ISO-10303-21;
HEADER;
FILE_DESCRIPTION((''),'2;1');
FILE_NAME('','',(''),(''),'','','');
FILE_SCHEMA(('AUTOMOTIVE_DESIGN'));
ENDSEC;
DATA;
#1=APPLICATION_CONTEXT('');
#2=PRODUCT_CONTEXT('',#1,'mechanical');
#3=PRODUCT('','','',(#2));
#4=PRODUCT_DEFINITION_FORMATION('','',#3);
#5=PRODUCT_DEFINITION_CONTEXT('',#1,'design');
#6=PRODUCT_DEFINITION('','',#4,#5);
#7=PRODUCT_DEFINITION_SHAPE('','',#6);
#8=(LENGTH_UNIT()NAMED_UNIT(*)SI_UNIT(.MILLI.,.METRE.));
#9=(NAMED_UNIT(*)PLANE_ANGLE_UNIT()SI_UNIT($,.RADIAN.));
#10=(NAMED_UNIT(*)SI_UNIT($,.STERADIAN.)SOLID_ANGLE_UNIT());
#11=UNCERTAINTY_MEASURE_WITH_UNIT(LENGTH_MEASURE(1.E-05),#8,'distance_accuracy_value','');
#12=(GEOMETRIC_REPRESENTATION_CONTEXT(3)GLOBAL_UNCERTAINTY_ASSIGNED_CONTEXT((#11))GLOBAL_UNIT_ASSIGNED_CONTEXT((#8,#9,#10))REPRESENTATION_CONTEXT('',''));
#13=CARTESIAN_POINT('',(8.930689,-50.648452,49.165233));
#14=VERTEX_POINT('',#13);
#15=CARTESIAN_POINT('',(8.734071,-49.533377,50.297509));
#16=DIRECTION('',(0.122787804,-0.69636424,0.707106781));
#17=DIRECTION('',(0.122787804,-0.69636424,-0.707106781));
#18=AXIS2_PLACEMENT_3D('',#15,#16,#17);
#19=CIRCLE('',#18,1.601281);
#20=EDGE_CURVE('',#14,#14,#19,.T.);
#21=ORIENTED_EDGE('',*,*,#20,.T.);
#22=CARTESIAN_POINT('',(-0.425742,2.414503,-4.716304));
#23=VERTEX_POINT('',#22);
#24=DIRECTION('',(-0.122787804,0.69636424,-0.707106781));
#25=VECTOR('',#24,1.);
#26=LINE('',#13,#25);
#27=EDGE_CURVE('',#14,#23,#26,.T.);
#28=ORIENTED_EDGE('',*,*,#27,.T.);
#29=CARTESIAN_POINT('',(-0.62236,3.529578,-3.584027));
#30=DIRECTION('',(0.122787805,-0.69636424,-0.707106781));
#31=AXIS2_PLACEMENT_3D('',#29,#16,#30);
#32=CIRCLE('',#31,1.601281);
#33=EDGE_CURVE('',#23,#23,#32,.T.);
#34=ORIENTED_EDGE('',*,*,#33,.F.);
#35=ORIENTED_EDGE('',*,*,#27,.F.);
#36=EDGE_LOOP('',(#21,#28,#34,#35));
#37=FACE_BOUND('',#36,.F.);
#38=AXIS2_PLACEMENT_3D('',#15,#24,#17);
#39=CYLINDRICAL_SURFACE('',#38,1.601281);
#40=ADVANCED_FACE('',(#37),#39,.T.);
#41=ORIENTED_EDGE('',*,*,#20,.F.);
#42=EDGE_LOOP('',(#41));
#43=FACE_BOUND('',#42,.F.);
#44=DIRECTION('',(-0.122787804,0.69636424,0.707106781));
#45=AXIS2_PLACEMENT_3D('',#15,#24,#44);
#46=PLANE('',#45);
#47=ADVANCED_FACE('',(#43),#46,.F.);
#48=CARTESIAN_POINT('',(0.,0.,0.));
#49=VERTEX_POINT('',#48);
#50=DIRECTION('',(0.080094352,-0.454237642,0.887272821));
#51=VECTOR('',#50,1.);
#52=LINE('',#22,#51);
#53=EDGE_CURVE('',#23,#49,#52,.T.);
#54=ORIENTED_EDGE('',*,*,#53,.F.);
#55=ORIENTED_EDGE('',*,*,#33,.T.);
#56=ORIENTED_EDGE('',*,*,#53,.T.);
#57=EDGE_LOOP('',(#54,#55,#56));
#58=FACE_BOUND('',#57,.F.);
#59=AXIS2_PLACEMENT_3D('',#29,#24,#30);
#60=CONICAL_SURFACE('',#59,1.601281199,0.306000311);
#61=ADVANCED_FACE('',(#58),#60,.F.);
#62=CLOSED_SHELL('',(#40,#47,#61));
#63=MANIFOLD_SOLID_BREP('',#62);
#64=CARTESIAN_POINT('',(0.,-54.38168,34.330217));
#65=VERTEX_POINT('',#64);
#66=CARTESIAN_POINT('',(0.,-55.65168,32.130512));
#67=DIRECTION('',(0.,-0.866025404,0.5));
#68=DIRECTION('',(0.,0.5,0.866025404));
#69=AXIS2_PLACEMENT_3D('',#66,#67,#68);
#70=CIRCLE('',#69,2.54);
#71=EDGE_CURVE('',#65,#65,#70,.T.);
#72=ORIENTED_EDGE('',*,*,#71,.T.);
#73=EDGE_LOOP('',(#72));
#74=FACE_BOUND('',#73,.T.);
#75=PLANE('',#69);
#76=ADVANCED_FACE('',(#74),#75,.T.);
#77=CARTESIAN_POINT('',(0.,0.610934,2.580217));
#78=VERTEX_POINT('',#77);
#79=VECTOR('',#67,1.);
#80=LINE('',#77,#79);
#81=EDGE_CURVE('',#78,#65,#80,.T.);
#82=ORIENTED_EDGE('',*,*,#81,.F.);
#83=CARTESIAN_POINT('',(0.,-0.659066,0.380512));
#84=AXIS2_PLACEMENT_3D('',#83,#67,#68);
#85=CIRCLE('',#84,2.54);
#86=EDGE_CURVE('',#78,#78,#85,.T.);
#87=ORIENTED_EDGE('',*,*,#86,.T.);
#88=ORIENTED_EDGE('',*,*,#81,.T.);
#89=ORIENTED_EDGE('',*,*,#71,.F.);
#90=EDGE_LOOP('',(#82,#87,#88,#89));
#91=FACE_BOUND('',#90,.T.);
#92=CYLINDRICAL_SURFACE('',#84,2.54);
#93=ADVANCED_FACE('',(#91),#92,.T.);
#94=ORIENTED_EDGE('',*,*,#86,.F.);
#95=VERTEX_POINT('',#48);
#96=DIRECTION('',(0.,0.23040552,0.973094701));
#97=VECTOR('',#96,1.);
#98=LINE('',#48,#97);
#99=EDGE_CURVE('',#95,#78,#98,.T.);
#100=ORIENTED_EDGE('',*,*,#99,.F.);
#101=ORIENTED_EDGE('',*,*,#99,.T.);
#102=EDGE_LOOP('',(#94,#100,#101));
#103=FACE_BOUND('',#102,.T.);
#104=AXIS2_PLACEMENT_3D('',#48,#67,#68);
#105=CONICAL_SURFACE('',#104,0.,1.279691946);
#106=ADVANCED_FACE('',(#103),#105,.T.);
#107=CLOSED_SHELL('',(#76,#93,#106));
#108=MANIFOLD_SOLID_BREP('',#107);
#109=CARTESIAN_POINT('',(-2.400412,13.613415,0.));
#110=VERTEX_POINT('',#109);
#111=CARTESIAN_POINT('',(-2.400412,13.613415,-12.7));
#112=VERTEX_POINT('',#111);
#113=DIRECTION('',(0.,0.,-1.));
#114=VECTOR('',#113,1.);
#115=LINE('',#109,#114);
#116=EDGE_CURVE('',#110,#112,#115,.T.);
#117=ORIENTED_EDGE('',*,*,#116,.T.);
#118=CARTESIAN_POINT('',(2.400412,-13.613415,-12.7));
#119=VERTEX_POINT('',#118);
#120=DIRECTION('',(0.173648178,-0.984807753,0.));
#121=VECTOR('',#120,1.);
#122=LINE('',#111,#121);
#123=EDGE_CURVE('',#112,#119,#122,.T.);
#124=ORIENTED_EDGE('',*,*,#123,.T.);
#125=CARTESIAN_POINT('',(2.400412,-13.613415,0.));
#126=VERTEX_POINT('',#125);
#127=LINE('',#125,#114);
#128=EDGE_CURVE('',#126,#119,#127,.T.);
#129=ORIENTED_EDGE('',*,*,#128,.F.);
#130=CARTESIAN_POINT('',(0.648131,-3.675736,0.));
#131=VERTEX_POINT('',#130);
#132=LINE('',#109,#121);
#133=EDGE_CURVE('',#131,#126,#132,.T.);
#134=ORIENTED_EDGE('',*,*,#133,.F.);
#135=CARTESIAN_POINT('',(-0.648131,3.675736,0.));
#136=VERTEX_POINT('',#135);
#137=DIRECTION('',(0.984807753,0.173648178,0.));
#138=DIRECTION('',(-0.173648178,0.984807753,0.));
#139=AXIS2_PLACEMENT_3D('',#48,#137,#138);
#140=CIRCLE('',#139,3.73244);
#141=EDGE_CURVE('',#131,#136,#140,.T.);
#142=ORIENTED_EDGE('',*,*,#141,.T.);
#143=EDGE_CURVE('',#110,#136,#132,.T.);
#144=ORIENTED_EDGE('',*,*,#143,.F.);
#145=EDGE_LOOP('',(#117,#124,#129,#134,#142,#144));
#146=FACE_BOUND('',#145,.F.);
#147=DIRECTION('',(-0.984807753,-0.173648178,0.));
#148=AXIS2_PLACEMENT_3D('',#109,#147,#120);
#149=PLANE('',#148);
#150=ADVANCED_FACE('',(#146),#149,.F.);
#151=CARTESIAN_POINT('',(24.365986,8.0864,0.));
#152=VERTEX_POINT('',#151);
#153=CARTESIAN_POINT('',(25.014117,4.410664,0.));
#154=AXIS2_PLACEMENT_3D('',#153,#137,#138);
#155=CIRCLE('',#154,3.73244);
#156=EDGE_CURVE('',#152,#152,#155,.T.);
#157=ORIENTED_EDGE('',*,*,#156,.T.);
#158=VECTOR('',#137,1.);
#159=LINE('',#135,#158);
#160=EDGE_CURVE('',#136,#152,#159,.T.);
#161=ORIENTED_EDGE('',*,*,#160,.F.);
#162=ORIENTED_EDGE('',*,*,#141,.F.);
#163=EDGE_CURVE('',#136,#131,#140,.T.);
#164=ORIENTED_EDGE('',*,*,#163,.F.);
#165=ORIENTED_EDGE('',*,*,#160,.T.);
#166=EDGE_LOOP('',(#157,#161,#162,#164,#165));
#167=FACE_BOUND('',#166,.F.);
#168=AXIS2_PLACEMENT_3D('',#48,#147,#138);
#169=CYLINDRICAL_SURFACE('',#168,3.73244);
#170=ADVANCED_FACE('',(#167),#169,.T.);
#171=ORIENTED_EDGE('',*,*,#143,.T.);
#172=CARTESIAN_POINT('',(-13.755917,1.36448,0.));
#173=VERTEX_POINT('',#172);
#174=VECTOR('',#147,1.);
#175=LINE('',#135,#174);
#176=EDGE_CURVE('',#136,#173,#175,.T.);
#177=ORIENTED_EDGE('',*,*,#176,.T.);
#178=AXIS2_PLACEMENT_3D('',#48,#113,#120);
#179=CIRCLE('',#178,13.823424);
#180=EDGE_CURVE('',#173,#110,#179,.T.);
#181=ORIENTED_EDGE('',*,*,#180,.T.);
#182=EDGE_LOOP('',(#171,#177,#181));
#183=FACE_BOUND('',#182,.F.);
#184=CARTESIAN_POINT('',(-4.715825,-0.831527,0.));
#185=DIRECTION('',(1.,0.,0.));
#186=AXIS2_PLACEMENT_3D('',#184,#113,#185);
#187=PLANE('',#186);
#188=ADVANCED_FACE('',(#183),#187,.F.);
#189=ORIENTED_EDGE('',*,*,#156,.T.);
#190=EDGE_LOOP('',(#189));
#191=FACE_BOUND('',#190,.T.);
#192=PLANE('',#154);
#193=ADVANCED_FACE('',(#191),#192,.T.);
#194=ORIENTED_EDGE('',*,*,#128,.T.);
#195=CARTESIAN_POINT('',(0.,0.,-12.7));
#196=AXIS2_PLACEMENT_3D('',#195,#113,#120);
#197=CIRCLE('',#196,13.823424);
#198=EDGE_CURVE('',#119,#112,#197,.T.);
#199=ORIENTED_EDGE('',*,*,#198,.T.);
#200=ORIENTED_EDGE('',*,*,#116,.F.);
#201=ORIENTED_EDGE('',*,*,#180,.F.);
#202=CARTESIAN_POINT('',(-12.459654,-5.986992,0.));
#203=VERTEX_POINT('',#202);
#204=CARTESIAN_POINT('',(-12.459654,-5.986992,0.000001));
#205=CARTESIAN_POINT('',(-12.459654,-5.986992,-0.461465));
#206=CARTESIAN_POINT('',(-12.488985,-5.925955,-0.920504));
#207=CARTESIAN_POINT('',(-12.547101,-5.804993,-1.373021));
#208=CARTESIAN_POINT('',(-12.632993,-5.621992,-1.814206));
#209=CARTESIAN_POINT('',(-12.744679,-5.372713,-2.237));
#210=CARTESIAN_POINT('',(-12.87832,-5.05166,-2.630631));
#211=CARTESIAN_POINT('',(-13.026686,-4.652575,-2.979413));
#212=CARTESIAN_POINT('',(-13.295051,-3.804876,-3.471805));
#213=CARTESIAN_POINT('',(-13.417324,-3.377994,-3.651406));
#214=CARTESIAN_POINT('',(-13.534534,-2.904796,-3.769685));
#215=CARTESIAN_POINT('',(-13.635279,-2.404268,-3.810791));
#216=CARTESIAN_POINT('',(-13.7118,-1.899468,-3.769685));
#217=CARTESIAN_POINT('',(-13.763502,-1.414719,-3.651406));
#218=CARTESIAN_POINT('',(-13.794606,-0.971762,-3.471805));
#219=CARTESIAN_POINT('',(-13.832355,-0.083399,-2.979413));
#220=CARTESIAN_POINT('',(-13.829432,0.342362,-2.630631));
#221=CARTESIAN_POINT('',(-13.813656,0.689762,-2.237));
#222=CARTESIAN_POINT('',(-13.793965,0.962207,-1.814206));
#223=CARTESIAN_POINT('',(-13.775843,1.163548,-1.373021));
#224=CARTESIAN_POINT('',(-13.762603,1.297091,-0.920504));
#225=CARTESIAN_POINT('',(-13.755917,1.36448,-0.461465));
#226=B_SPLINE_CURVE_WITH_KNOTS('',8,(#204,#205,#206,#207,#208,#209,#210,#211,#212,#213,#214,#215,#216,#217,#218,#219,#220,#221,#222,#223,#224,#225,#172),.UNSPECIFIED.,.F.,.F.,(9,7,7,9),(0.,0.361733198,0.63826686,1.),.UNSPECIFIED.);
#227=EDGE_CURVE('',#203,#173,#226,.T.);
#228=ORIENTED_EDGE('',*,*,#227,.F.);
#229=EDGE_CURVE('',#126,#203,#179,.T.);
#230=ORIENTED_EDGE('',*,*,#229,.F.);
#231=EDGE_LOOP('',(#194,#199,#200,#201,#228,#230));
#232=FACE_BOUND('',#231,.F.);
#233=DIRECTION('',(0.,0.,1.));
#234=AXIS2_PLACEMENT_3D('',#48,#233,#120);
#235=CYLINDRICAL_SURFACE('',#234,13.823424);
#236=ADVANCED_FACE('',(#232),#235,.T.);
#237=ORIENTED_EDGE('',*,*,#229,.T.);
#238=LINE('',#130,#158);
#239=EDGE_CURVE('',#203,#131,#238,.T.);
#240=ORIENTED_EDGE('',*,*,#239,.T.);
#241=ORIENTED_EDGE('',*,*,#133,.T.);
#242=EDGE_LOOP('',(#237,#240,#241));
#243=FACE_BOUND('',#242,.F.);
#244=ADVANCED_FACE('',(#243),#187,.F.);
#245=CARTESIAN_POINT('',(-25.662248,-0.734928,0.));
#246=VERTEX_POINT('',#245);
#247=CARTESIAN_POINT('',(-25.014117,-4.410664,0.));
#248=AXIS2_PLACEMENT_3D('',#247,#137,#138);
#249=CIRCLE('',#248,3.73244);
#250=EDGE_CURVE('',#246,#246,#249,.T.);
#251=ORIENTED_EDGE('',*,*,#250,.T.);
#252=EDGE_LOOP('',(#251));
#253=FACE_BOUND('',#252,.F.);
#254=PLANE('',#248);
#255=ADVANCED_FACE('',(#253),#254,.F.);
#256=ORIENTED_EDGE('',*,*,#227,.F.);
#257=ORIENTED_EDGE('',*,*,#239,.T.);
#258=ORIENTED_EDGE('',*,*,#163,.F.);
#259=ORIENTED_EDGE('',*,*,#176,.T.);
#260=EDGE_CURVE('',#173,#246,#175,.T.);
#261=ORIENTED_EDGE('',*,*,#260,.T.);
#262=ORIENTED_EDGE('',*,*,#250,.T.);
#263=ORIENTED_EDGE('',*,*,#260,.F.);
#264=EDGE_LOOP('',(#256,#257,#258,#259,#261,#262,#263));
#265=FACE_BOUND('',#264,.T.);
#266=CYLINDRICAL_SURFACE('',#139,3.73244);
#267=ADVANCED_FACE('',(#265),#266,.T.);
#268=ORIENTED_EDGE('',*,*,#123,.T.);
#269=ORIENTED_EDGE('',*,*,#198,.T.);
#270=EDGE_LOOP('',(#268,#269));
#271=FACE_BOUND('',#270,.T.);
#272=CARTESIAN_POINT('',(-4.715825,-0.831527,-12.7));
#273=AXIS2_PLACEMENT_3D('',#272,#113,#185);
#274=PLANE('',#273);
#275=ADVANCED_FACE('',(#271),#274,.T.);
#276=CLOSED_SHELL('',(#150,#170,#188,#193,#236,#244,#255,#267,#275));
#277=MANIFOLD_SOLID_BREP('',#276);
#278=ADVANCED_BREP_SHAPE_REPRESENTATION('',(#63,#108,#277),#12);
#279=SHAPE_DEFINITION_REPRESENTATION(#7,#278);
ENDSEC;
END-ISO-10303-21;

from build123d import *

# Parameters (mm, degrees)
F5_DEPTH      = 12.7
F8_R          = 3.7324399965
F9_DEPTH      = 25.4
F9_DEPTH_BACK = 25.4


with BuildPart() as f3:
    # F0 (on Right) → F3 (revolve)
    with BuildSketch(Plane.YZ):
        Polygon((-54.3816796127, 34.3302167309), (-55.6516796127, 32.1305122053), (0, 0), (0.6109335276, 2.5802167309), align=None)
    revolve(axis=Axis((0, -33.598147265, 19.3978993677), (0, -0.8660254038, 0.5)))


with BuildPart() as f5:
    # F4 (on line) → F5 (new body)
    with BuildSketch(Plane(origin=(0, 0, 0), x_dir=(1, 0, 0), z_dir=(0, 0, -1))):
        with BuildLine():
            Line((0, 0), (2.4004124433, 13.6134154491))
            ThreePointArc((2.4004124433, 13.6134154491), (-13.6134154491, 2.4004124433), (-2.4004124433, -13.6134154491))
            Line((-2.4004124433, -13.6134154491), (0, 0))
        make_face()
    extrude(amount=F5_DEPTH)

    # F8 (on face) → F9 (join, two sides)
    with BuildSketch(Plane(origin=(0, 0, 0), x_dir=(-0.1736481777, 0.984807753, 0), z_dir=(0.984807753, 0.1736481777, 0))) as f9_sk:
        Circle(F8_R)
    extrude(amount=F9_DEPTH)
    extrude(f9_sk.sketch, amount=-F9_DEPTH_BACK)


with BuildPart() as f7:
    # F6 (on face) → F7 (revolve)
    with BuildSketch(Plane(origin=(0, 0, 0), x_dir=(-0.1736481777, 0.984807753, 0), z_dir=(0.984807753, 0.1736481777, 0))):
        Polygon((2.4517506192, -4.7163042091), (0, 0), (-50.2975093123, 50.2975093123), (-51.4297861072, 49.1652325173), align=None)
    revolve(axis=Axis((5.3802521718, -30.5129263268, 30.9836373987), (0.122787804, -0.6963642403, 0.7071067812)))


solid = Compound([f3.part, f5.part, f7.part])
